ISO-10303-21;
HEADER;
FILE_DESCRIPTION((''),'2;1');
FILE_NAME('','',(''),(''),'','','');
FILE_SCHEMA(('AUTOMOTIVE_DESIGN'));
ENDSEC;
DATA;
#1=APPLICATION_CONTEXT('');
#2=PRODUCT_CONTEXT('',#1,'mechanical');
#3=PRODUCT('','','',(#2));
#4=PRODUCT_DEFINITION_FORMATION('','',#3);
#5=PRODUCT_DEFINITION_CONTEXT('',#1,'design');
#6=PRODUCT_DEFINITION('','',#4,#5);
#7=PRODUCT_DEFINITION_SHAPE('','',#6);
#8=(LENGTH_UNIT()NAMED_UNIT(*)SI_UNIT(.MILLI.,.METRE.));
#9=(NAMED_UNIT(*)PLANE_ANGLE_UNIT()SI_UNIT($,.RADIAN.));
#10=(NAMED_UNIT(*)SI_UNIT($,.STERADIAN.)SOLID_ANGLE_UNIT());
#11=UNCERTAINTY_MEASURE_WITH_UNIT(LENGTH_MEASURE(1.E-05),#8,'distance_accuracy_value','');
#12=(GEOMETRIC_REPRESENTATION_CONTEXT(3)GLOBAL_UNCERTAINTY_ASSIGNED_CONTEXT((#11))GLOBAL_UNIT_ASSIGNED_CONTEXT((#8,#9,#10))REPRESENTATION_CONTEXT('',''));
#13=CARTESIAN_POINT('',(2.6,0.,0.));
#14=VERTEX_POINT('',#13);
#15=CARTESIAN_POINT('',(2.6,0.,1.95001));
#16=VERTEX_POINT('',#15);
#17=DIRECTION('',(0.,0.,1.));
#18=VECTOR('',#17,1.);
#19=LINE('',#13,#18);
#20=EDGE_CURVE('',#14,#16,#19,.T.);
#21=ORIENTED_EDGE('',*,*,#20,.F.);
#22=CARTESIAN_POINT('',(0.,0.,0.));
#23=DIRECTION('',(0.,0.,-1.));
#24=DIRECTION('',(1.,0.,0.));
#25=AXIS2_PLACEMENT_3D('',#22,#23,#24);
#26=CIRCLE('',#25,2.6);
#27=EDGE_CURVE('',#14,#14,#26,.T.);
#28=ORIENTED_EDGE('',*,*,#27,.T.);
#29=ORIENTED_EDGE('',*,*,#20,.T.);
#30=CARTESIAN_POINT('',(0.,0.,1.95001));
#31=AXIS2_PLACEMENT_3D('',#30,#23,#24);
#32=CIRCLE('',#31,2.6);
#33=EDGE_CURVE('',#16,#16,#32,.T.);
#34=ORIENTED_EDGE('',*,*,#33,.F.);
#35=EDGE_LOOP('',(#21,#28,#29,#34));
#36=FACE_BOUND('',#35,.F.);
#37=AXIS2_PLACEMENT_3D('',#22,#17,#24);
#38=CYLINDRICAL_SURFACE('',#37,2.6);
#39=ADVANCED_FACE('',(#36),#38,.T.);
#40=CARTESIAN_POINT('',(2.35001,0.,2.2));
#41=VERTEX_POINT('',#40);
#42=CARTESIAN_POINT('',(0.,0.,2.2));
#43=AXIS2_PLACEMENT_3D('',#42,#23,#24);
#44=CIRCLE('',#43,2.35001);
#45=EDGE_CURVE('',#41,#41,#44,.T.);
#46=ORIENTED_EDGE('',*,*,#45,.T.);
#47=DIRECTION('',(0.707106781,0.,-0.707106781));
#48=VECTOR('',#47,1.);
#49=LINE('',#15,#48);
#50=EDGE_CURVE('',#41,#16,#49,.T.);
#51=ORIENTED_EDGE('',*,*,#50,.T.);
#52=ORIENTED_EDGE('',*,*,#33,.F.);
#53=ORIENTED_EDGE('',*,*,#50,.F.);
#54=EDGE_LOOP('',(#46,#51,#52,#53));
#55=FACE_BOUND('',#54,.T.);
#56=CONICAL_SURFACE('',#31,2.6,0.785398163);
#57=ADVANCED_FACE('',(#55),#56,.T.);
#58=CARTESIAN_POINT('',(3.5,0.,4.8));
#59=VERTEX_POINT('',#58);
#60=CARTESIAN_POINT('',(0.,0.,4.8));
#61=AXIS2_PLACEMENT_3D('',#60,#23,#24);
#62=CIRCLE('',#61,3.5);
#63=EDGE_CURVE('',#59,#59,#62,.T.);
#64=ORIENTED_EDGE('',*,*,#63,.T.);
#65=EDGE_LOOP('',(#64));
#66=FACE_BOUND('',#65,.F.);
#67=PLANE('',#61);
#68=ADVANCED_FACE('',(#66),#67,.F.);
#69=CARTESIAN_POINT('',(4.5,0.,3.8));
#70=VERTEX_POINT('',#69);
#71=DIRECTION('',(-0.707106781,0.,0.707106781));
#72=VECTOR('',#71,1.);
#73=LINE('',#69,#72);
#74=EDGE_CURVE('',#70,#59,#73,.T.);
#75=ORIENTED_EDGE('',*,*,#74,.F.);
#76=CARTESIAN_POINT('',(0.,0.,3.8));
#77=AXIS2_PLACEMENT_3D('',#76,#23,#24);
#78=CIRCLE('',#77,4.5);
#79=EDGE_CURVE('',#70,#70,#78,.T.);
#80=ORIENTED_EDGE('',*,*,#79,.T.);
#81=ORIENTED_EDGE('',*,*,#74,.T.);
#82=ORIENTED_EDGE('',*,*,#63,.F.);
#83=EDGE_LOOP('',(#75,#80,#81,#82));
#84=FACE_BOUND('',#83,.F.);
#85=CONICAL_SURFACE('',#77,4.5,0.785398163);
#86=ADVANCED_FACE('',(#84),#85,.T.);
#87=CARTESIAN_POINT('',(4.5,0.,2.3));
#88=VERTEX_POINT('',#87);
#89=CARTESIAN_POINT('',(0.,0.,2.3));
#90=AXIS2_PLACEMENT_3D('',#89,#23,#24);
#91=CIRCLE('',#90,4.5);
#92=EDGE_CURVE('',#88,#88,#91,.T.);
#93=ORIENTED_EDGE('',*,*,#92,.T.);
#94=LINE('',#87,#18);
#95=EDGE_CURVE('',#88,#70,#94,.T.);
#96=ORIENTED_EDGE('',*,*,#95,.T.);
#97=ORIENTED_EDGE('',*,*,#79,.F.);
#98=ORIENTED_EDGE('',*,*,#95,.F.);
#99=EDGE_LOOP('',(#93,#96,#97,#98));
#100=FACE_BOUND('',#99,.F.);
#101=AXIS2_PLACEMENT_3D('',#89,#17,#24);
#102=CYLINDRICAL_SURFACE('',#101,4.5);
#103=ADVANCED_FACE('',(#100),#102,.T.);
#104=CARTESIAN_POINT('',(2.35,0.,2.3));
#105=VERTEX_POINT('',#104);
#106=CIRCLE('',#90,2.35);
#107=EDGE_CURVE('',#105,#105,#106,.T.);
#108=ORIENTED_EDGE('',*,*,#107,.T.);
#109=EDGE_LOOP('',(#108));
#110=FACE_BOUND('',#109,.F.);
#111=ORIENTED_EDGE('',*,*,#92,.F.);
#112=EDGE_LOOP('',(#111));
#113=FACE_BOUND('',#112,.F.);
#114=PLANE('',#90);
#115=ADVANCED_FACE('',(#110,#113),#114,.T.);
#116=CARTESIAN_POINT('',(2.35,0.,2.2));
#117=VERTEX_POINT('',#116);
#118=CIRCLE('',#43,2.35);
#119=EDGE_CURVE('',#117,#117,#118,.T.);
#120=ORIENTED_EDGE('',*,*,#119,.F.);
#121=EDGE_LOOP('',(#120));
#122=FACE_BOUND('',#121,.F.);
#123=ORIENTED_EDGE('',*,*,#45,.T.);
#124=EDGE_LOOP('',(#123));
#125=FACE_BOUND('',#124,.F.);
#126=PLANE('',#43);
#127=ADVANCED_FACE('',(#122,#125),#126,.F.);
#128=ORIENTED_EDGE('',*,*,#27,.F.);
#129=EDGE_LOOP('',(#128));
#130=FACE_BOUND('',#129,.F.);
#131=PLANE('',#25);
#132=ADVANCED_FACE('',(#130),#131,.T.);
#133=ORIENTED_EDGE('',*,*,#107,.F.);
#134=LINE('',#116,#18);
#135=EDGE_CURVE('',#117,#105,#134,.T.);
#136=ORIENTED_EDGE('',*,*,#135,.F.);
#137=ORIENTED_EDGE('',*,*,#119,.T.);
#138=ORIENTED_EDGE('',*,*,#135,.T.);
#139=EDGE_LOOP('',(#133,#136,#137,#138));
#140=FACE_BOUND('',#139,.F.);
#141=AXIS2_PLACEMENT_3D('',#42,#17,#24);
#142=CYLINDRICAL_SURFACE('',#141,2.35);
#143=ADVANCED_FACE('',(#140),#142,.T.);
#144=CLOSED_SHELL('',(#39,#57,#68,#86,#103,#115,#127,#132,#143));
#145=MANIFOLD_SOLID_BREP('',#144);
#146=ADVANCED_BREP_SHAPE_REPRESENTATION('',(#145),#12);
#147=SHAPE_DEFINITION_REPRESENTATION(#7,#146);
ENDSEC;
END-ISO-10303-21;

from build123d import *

# Parameters (mm, degrees)
F2_SIZE = 1
F3_SIZE = 0.24999


# Not quite as in the source:
# - a fillet or chamfer is up to 0.001 mm smaller than in the source, because OpenCascade refuses the exact size


with BuildPart() as f1:
    # F0 (on Front) → F1 (revolve)
    with BuildSketch(Plane.XZ):
        Polygon((0, 4.8), (0, 0), (2.6, 0), (2.6, 2.2), (2.35, 2.2), (2.35, 2.3), (2.6, 2.3), (4.5, 2.3), (4.5, 4.8), align=None)
    revolve(axis=Axis((0, 0, 2.4), (0, 0, -1)))

    # F2
    f2_edges = [f1.edges().sort_by_distance(p)[0] for p in [
        (-4.5, 0, 4.8),
    ]]
    chamfer(f2_edges, length=F2_SIZE)

    # F3 (size 0.25 in the source; OpenCascade refuses exactly that, so slightly less here)
    f3_edges = [f1.edges().sort_by_distance(p)[0] for p in [
        (-2.6, 0, 2.2),
    ]]
    chamfer(f3_edges, length=F3_SIZE)


solid = f1.part
